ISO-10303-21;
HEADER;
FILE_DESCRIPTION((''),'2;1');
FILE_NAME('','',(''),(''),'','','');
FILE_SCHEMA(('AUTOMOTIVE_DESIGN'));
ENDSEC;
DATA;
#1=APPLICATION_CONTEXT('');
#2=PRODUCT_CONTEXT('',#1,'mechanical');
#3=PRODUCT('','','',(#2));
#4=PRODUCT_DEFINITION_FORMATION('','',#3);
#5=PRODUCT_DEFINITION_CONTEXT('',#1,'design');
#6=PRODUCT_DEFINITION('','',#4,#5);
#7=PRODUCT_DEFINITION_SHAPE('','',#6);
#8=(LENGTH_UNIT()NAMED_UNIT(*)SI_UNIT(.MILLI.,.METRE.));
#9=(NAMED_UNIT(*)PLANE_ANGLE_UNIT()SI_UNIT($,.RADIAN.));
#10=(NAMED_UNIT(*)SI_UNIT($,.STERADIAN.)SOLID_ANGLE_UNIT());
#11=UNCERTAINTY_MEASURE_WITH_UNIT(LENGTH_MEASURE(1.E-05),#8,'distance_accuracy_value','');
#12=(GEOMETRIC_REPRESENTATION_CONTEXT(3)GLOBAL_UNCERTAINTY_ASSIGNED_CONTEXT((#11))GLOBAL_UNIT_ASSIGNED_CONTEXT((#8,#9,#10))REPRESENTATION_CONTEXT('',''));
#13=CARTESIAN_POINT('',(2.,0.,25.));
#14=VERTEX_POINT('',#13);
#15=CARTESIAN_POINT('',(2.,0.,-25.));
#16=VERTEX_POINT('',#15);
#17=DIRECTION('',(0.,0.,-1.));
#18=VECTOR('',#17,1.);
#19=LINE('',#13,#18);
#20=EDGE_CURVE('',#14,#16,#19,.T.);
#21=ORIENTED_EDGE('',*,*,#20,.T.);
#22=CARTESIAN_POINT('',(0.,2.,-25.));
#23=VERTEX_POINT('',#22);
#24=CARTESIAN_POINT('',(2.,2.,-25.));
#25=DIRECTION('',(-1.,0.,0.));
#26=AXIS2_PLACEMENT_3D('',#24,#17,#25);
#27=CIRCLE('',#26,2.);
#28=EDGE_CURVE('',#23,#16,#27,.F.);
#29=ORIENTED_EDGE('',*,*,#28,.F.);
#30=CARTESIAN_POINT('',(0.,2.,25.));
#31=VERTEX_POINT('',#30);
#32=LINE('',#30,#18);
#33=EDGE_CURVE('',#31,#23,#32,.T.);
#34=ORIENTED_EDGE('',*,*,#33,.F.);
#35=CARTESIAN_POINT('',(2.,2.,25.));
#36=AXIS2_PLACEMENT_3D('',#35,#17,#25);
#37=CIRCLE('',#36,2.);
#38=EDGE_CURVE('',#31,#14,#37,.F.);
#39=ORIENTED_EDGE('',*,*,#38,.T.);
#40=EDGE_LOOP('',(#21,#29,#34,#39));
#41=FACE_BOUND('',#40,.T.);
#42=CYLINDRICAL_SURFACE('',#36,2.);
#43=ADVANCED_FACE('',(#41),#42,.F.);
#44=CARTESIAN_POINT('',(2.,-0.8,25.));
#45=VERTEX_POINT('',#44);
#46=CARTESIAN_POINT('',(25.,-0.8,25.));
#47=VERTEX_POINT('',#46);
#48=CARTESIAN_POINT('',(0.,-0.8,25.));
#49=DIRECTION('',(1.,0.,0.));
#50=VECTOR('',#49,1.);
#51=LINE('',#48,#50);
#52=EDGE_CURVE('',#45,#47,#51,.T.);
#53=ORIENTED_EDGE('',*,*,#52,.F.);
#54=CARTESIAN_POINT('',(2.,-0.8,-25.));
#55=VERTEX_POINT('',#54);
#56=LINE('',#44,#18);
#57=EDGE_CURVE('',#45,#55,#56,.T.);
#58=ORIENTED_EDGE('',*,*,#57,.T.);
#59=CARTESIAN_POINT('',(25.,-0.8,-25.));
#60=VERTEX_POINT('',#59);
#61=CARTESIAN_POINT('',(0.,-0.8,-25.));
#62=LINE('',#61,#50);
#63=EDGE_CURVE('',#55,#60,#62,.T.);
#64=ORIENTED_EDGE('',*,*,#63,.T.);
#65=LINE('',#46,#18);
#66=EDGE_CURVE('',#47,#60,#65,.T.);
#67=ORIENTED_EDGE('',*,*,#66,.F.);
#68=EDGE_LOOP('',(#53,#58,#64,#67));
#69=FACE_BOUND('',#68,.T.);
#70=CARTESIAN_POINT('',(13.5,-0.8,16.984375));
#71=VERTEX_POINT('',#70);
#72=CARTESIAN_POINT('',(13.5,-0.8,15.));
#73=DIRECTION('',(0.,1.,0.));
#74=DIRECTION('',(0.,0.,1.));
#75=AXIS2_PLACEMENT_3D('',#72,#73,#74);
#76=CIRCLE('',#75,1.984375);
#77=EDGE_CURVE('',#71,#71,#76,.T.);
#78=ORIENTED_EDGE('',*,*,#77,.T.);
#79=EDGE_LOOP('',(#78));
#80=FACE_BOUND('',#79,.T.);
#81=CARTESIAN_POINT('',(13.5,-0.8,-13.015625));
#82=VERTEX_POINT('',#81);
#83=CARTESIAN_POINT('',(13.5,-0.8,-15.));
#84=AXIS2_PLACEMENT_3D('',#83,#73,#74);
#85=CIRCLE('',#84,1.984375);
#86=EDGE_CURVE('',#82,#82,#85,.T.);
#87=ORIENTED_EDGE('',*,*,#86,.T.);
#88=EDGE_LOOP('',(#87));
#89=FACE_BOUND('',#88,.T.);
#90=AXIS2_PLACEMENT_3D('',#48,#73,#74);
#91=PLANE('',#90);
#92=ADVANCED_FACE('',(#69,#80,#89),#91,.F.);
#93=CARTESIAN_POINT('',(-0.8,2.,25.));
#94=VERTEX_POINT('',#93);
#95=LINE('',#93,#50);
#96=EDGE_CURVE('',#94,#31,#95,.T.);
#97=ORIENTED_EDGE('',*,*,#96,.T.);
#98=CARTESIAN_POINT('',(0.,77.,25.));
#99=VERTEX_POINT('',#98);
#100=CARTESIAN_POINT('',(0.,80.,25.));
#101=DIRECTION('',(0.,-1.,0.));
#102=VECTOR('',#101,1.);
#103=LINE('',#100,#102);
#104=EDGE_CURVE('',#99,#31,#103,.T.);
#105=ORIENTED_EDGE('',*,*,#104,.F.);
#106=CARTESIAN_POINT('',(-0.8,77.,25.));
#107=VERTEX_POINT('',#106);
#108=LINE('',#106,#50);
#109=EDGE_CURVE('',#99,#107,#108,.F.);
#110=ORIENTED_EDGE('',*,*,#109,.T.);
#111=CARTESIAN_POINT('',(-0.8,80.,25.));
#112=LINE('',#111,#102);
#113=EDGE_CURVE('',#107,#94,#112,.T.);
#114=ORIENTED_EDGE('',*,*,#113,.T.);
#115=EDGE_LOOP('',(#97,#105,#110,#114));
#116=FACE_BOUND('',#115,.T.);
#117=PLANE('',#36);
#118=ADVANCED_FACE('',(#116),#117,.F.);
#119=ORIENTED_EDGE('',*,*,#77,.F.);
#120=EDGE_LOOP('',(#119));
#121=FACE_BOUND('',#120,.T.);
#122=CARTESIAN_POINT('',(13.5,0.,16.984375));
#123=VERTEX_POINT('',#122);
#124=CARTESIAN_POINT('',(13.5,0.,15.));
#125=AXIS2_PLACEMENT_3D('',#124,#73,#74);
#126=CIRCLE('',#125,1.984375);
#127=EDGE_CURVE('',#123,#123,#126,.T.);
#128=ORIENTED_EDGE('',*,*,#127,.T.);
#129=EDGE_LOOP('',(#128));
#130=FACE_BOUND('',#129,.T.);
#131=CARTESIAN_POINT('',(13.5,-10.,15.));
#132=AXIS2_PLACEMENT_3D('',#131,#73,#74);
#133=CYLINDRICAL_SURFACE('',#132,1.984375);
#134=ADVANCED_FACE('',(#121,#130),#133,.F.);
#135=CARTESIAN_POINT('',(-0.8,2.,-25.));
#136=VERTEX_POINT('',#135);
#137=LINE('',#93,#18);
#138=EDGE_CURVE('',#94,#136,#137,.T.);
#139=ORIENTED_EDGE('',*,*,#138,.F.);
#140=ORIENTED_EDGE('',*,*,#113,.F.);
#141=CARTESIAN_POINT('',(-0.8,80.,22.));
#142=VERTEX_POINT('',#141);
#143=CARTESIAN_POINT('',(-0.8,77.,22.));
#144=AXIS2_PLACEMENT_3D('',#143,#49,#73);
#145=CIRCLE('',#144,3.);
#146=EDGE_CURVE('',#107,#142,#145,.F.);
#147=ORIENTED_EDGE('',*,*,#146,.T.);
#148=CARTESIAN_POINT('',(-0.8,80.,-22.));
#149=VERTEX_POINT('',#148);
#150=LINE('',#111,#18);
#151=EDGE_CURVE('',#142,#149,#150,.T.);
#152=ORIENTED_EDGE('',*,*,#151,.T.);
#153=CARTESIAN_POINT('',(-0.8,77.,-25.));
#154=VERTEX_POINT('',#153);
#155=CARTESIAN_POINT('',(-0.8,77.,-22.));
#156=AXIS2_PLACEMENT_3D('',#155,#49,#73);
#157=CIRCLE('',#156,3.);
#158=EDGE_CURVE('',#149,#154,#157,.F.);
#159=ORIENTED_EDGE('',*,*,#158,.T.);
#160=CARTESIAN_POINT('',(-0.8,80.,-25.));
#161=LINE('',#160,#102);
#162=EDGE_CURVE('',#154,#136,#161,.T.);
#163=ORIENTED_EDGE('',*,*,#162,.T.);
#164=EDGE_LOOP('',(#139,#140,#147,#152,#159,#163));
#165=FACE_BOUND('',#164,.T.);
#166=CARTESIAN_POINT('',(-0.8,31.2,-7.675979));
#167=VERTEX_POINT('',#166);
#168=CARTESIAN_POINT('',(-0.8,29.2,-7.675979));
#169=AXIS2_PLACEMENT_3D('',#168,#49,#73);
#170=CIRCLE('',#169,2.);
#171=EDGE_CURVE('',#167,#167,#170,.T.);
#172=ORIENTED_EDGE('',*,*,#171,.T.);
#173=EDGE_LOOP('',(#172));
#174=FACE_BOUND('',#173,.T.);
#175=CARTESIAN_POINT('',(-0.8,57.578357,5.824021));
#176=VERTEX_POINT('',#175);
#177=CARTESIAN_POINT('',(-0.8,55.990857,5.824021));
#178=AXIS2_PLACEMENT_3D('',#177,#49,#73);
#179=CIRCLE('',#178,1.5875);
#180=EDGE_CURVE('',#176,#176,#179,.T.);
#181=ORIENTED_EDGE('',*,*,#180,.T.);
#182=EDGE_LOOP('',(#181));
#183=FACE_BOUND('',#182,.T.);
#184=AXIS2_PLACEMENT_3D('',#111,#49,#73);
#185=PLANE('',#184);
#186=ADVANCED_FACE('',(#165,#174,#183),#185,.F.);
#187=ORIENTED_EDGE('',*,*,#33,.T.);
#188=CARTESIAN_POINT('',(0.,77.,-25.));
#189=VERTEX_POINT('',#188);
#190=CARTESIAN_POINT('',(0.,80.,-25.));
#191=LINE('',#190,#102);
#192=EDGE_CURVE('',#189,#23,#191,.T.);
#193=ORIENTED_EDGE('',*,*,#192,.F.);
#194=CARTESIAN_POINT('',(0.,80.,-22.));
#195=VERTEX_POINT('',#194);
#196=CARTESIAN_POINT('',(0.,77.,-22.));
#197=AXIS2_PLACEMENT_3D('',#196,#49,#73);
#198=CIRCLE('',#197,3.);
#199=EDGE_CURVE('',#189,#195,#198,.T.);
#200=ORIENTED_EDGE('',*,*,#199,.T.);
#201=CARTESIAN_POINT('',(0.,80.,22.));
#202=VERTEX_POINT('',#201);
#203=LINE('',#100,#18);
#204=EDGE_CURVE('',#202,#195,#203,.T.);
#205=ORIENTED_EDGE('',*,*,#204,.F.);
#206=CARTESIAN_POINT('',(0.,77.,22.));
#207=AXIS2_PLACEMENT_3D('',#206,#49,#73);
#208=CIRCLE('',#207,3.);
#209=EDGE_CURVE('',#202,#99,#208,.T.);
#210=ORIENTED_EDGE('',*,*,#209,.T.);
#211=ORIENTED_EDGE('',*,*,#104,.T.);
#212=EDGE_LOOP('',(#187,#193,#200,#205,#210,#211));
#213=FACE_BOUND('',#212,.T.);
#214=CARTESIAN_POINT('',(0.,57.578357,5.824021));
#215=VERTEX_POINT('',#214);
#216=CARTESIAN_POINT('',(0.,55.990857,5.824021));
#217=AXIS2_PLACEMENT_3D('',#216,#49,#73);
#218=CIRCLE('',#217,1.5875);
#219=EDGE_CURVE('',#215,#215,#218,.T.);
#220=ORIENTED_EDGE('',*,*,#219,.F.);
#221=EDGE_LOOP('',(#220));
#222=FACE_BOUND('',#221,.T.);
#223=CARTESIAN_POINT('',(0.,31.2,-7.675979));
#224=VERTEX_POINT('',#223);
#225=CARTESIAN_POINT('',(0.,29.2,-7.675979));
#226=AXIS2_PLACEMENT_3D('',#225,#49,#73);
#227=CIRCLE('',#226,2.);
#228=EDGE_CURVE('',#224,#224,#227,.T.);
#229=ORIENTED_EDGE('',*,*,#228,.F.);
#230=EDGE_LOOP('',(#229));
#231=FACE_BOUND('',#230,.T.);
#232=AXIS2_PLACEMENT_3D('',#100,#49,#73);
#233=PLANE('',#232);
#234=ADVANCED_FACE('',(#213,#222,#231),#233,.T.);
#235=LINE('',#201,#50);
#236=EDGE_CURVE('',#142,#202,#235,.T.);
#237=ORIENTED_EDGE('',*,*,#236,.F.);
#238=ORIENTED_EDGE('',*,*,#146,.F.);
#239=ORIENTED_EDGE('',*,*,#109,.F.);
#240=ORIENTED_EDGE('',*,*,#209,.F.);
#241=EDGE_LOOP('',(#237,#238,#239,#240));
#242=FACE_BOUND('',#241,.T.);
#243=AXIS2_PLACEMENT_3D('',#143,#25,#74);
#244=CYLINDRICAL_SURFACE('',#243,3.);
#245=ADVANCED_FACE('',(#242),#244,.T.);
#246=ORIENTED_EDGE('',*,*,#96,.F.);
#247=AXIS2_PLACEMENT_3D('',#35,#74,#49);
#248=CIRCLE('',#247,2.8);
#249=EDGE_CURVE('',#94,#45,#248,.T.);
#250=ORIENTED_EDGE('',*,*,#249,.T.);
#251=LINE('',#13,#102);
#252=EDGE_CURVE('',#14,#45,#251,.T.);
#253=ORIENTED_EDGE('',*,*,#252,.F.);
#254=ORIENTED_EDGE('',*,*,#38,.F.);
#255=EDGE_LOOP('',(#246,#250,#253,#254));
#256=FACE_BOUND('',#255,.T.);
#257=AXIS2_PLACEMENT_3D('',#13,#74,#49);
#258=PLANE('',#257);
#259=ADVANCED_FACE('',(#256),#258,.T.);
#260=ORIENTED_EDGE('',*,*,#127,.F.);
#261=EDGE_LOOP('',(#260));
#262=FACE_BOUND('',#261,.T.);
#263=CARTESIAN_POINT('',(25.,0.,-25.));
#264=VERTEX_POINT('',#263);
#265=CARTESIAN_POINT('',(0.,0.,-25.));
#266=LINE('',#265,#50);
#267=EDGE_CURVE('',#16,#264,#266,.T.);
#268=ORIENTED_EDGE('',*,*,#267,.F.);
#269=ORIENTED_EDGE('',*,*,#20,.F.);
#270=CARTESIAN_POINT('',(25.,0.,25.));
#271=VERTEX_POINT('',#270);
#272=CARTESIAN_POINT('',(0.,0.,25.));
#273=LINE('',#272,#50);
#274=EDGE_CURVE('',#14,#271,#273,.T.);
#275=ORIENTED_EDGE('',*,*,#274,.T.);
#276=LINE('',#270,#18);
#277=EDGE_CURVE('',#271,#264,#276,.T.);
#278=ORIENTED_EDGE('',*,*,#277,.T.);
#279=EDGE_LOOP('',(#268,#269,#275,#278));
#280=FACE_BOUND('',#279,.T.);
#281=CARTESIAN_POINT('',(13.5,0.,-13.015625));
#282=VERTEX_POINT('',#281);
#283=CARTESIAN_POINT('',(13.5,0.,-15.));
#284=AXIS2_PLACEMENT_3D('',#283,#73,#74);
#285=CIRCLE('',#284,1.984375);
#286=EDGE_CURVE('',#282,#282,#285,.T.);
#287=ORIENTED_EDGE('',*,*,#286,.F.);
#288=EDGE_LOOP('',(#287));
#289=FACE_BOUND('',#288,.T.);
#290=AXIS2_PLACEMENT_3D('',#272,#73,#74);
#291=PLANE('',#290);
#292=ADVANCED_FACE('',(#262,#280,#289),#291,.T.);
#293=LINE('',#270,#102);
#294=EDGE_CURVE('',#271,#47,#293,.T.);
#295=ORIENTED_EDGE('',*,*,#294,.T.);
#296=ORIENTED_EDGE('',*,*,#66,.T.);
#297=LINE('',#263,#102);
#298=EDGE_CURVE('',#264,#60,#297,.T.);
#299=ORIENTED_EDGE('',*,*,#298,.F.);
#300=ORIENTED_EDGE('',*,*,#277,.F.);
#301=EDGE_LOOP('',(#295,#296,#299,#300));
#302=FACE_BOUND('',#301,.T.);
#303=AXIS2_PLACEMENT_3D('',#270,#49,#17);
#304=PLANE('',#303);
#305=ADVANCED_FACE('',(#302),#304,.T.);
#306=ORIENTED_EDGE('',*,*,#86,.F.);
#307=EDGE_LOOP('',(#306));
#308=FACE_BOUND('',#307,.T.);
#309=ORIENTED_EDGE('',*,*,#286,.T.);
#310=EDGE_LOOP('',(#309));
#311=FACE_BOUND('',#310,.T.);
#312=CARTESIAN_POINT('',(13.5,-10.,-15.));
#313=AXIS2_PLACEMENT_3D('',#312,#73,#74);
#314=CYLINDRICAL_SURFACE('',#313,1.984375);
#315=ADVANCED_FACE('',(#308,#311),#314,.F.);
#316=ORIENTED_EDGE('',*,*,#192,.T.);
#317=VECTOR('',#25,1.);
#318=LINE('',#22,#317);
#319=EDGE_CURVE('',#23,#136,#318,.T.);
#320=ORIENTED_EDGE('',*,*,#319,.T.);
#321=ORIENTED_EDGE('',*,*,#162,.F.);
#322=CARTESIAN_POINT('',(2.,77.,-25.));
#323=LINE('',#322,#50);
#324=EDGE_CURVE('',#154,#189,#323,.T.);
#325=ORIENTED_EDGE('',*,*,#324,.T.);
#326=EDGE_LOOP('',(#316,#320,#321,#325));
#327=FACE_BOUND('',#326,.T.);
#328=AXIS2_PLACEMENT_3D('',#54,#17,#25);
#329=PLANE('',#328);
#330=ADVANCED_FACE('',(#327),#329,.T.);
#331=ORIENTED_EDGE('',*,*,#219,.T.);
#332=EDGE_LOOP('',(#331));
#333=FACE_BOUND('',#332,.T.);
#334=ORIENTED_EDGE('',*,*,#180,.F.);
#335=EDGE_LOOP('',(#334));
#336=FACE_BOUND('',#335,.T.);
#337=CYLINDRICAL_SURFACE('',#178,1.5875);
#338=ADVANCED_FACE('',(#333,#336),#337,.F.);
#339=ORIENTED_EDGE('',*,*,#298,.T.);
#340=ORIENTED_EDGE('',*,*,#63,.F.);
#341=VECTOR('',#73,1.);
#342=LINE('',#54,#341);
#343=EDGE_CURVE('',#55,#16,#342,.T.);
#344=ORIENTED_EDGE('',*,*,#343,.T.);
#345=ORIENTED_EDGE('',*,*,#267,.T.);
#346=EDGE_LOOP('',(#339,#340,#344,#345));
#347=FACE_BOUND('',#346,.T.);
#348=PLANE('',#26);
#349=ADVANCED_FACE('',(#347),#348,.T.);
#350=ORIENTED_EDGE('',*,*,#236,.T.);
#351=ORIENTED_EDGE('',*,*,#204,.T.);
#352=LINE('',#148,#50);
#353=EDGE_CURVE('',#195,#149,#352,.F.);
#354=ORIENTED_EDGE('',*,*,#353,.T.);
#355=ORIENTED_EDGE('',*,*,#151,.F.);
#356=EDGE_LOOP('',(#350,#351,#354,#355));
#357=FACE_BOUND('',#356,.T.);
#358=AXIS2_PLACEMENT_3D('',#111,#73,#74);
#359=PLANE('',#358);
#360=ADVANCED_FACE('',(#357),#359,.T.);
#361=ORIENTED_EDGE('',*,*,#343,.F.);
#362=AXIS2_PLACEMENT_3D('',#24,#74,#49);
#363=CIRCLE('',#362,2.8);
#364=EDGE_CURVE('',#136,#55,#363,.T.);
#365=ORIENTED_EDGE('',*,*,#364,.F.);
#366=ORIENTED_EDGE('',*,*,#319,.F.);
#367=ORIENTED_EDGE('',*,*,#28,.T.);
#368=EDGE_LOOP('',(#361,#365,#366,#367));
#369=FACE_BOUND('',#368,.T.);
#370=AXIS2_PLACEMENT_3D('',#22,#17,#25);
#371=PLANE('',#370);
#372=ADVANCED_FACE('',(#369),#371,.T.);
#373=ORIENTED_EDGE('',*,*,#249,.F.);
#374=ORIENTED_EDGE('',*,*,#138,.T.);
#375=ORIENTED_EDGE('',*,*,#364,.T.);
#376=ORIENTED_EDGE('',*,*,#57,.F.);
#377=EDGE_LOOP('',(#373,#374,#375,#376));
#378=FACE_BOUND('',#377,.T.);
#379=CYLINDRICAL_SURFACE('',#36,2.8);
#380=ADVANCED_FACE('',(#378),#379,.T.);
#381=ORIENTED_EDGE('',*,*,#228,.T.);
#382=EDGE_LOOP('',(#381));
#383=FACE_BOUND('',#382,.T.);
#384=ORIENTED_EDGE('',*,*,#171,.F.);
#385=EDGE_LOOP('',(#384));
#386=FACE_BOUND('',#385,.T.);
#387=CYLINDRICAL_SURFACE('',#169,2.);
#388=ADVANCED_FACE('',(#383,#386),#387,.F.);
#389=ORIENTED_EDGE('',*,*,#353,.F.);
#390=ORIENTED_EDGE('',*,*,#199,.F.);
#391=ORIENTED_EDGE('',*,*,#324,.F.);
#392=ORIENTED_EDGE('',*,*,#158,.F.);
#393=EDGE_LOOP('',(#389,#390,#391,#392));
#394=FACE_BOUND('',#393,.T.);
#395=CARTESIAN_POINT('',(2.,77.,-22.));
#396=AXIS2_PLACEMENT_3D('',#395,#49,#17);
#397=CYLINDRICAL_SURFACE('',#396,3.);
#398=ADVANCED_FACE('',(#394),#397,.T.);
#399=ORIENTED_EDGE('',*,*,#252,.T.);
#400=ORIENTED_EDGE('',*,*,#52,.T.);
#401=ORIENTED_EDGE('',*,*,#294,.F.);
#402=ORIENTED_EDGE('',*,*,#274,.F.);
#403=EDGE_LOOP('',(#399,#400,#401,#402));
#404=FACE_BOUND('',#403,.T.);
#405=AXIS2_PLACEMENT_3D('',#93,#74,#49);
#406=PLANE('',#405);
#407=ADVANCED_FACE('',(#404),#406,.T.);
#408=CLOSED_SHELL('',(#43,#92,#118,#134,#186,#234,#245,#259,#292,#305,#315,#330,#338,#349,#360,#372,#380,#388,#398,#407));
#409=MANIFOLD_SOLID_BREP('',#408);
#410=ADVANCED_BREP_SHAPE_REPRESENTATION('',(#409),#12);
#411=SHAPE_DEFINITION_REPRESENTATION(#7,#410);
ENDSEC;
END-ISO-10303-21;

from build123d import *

# Parameters (mm, degrees)
BASE_FLANGE1_DEPTH      = 25
BASE_FLANGE1_DEPTH_BACK = 25
SKETCH6_R               = 1.5875
SKETCH6_R_2             = 2
CUT_EXTRUDE1_DEPTH      = 88.464278423
SKETCH7_R               = 1.984375
CUT_EXTRUDE2_DEPTH      = 10
FILLET1_R               = 3


# Sheet-metal steps are written as plain solids
with BuildPart() as part:
    # Sketch1 → Base-Flange1 (new, two sides: drawn at the far end of the back side and taken through both)
    with BuildSketch(Plane.XY.offset(-BASE_FLANGE1_DEPTH_BACK)):
        with BuildLine():
            Line((0, 80), (0, 2))
            ThreePointArc((0, 2), (0.585786438, 0.585786438), (2, 0))
            Line((2, 0), (25, 0))
            Line((25, 0), (25, -0.8))
            Line((25, -0.8), (2, -0.8))
            ThreePointArc((2, -0.8), (0.020101013, 0.020101013), (-0.8, 2))
            Line((-0.8, 2), (-0.8, 80))
            Line((-0.8, 80), (0, 80))
        make_face()
    extrude(amount=BASE_FLANGE1_DEPTH + BASE_FLANGE1_DEPTH_BACK)

    # Sketch6 → Cut-Extrude1 (cut, through all)
    with BuildSketch(Plane(origin=(0, 0, 0), x_dir=(0, 0, -1), z_dir=(1, 0, 0))):
        with Locations(Location((-5.824020981, 55.990856649, 0), (0, 0, 90))):
            Circle(SKETCH6_R)
        with Locations(Location((7.675979019, 29.2, 0), (0, 0, 90))):
            Circle(SKETCH6_R_2)
    extrude(amount=-CUT_EXTRUDE1_DEPTH, mode=Mode.SUBTRACT)

    # Sketch7 → Cut-Extrude2 (cut)
    with BuildSketch(Plane(origin=(0, 0, 0), x_dir=(1, 0, 0), z_dir=(0, 1, 0))):
        with Locations(Location((13.5, 15, 0), (0, 0, 270))):
            Circle(SKETCH7_R)
        with Locations(Location((13.5, -15, 0), (0, 0, 270))):
            Circle(SKETCH7_R)
    extrude(amount=-CUT_EXTRUDE2_DEPTH, mode=Mode.SUBTRACT)

    # Fillet1
    fillet1_edges = [part.edges().sort_by_distance(p)[0] for p in [
        (-0.4, 80, 25),
        (-0.4, 80, -25),
    ]]
    fillet(fillet1_edges, radius=FILLET1_R)


solid = part.part
